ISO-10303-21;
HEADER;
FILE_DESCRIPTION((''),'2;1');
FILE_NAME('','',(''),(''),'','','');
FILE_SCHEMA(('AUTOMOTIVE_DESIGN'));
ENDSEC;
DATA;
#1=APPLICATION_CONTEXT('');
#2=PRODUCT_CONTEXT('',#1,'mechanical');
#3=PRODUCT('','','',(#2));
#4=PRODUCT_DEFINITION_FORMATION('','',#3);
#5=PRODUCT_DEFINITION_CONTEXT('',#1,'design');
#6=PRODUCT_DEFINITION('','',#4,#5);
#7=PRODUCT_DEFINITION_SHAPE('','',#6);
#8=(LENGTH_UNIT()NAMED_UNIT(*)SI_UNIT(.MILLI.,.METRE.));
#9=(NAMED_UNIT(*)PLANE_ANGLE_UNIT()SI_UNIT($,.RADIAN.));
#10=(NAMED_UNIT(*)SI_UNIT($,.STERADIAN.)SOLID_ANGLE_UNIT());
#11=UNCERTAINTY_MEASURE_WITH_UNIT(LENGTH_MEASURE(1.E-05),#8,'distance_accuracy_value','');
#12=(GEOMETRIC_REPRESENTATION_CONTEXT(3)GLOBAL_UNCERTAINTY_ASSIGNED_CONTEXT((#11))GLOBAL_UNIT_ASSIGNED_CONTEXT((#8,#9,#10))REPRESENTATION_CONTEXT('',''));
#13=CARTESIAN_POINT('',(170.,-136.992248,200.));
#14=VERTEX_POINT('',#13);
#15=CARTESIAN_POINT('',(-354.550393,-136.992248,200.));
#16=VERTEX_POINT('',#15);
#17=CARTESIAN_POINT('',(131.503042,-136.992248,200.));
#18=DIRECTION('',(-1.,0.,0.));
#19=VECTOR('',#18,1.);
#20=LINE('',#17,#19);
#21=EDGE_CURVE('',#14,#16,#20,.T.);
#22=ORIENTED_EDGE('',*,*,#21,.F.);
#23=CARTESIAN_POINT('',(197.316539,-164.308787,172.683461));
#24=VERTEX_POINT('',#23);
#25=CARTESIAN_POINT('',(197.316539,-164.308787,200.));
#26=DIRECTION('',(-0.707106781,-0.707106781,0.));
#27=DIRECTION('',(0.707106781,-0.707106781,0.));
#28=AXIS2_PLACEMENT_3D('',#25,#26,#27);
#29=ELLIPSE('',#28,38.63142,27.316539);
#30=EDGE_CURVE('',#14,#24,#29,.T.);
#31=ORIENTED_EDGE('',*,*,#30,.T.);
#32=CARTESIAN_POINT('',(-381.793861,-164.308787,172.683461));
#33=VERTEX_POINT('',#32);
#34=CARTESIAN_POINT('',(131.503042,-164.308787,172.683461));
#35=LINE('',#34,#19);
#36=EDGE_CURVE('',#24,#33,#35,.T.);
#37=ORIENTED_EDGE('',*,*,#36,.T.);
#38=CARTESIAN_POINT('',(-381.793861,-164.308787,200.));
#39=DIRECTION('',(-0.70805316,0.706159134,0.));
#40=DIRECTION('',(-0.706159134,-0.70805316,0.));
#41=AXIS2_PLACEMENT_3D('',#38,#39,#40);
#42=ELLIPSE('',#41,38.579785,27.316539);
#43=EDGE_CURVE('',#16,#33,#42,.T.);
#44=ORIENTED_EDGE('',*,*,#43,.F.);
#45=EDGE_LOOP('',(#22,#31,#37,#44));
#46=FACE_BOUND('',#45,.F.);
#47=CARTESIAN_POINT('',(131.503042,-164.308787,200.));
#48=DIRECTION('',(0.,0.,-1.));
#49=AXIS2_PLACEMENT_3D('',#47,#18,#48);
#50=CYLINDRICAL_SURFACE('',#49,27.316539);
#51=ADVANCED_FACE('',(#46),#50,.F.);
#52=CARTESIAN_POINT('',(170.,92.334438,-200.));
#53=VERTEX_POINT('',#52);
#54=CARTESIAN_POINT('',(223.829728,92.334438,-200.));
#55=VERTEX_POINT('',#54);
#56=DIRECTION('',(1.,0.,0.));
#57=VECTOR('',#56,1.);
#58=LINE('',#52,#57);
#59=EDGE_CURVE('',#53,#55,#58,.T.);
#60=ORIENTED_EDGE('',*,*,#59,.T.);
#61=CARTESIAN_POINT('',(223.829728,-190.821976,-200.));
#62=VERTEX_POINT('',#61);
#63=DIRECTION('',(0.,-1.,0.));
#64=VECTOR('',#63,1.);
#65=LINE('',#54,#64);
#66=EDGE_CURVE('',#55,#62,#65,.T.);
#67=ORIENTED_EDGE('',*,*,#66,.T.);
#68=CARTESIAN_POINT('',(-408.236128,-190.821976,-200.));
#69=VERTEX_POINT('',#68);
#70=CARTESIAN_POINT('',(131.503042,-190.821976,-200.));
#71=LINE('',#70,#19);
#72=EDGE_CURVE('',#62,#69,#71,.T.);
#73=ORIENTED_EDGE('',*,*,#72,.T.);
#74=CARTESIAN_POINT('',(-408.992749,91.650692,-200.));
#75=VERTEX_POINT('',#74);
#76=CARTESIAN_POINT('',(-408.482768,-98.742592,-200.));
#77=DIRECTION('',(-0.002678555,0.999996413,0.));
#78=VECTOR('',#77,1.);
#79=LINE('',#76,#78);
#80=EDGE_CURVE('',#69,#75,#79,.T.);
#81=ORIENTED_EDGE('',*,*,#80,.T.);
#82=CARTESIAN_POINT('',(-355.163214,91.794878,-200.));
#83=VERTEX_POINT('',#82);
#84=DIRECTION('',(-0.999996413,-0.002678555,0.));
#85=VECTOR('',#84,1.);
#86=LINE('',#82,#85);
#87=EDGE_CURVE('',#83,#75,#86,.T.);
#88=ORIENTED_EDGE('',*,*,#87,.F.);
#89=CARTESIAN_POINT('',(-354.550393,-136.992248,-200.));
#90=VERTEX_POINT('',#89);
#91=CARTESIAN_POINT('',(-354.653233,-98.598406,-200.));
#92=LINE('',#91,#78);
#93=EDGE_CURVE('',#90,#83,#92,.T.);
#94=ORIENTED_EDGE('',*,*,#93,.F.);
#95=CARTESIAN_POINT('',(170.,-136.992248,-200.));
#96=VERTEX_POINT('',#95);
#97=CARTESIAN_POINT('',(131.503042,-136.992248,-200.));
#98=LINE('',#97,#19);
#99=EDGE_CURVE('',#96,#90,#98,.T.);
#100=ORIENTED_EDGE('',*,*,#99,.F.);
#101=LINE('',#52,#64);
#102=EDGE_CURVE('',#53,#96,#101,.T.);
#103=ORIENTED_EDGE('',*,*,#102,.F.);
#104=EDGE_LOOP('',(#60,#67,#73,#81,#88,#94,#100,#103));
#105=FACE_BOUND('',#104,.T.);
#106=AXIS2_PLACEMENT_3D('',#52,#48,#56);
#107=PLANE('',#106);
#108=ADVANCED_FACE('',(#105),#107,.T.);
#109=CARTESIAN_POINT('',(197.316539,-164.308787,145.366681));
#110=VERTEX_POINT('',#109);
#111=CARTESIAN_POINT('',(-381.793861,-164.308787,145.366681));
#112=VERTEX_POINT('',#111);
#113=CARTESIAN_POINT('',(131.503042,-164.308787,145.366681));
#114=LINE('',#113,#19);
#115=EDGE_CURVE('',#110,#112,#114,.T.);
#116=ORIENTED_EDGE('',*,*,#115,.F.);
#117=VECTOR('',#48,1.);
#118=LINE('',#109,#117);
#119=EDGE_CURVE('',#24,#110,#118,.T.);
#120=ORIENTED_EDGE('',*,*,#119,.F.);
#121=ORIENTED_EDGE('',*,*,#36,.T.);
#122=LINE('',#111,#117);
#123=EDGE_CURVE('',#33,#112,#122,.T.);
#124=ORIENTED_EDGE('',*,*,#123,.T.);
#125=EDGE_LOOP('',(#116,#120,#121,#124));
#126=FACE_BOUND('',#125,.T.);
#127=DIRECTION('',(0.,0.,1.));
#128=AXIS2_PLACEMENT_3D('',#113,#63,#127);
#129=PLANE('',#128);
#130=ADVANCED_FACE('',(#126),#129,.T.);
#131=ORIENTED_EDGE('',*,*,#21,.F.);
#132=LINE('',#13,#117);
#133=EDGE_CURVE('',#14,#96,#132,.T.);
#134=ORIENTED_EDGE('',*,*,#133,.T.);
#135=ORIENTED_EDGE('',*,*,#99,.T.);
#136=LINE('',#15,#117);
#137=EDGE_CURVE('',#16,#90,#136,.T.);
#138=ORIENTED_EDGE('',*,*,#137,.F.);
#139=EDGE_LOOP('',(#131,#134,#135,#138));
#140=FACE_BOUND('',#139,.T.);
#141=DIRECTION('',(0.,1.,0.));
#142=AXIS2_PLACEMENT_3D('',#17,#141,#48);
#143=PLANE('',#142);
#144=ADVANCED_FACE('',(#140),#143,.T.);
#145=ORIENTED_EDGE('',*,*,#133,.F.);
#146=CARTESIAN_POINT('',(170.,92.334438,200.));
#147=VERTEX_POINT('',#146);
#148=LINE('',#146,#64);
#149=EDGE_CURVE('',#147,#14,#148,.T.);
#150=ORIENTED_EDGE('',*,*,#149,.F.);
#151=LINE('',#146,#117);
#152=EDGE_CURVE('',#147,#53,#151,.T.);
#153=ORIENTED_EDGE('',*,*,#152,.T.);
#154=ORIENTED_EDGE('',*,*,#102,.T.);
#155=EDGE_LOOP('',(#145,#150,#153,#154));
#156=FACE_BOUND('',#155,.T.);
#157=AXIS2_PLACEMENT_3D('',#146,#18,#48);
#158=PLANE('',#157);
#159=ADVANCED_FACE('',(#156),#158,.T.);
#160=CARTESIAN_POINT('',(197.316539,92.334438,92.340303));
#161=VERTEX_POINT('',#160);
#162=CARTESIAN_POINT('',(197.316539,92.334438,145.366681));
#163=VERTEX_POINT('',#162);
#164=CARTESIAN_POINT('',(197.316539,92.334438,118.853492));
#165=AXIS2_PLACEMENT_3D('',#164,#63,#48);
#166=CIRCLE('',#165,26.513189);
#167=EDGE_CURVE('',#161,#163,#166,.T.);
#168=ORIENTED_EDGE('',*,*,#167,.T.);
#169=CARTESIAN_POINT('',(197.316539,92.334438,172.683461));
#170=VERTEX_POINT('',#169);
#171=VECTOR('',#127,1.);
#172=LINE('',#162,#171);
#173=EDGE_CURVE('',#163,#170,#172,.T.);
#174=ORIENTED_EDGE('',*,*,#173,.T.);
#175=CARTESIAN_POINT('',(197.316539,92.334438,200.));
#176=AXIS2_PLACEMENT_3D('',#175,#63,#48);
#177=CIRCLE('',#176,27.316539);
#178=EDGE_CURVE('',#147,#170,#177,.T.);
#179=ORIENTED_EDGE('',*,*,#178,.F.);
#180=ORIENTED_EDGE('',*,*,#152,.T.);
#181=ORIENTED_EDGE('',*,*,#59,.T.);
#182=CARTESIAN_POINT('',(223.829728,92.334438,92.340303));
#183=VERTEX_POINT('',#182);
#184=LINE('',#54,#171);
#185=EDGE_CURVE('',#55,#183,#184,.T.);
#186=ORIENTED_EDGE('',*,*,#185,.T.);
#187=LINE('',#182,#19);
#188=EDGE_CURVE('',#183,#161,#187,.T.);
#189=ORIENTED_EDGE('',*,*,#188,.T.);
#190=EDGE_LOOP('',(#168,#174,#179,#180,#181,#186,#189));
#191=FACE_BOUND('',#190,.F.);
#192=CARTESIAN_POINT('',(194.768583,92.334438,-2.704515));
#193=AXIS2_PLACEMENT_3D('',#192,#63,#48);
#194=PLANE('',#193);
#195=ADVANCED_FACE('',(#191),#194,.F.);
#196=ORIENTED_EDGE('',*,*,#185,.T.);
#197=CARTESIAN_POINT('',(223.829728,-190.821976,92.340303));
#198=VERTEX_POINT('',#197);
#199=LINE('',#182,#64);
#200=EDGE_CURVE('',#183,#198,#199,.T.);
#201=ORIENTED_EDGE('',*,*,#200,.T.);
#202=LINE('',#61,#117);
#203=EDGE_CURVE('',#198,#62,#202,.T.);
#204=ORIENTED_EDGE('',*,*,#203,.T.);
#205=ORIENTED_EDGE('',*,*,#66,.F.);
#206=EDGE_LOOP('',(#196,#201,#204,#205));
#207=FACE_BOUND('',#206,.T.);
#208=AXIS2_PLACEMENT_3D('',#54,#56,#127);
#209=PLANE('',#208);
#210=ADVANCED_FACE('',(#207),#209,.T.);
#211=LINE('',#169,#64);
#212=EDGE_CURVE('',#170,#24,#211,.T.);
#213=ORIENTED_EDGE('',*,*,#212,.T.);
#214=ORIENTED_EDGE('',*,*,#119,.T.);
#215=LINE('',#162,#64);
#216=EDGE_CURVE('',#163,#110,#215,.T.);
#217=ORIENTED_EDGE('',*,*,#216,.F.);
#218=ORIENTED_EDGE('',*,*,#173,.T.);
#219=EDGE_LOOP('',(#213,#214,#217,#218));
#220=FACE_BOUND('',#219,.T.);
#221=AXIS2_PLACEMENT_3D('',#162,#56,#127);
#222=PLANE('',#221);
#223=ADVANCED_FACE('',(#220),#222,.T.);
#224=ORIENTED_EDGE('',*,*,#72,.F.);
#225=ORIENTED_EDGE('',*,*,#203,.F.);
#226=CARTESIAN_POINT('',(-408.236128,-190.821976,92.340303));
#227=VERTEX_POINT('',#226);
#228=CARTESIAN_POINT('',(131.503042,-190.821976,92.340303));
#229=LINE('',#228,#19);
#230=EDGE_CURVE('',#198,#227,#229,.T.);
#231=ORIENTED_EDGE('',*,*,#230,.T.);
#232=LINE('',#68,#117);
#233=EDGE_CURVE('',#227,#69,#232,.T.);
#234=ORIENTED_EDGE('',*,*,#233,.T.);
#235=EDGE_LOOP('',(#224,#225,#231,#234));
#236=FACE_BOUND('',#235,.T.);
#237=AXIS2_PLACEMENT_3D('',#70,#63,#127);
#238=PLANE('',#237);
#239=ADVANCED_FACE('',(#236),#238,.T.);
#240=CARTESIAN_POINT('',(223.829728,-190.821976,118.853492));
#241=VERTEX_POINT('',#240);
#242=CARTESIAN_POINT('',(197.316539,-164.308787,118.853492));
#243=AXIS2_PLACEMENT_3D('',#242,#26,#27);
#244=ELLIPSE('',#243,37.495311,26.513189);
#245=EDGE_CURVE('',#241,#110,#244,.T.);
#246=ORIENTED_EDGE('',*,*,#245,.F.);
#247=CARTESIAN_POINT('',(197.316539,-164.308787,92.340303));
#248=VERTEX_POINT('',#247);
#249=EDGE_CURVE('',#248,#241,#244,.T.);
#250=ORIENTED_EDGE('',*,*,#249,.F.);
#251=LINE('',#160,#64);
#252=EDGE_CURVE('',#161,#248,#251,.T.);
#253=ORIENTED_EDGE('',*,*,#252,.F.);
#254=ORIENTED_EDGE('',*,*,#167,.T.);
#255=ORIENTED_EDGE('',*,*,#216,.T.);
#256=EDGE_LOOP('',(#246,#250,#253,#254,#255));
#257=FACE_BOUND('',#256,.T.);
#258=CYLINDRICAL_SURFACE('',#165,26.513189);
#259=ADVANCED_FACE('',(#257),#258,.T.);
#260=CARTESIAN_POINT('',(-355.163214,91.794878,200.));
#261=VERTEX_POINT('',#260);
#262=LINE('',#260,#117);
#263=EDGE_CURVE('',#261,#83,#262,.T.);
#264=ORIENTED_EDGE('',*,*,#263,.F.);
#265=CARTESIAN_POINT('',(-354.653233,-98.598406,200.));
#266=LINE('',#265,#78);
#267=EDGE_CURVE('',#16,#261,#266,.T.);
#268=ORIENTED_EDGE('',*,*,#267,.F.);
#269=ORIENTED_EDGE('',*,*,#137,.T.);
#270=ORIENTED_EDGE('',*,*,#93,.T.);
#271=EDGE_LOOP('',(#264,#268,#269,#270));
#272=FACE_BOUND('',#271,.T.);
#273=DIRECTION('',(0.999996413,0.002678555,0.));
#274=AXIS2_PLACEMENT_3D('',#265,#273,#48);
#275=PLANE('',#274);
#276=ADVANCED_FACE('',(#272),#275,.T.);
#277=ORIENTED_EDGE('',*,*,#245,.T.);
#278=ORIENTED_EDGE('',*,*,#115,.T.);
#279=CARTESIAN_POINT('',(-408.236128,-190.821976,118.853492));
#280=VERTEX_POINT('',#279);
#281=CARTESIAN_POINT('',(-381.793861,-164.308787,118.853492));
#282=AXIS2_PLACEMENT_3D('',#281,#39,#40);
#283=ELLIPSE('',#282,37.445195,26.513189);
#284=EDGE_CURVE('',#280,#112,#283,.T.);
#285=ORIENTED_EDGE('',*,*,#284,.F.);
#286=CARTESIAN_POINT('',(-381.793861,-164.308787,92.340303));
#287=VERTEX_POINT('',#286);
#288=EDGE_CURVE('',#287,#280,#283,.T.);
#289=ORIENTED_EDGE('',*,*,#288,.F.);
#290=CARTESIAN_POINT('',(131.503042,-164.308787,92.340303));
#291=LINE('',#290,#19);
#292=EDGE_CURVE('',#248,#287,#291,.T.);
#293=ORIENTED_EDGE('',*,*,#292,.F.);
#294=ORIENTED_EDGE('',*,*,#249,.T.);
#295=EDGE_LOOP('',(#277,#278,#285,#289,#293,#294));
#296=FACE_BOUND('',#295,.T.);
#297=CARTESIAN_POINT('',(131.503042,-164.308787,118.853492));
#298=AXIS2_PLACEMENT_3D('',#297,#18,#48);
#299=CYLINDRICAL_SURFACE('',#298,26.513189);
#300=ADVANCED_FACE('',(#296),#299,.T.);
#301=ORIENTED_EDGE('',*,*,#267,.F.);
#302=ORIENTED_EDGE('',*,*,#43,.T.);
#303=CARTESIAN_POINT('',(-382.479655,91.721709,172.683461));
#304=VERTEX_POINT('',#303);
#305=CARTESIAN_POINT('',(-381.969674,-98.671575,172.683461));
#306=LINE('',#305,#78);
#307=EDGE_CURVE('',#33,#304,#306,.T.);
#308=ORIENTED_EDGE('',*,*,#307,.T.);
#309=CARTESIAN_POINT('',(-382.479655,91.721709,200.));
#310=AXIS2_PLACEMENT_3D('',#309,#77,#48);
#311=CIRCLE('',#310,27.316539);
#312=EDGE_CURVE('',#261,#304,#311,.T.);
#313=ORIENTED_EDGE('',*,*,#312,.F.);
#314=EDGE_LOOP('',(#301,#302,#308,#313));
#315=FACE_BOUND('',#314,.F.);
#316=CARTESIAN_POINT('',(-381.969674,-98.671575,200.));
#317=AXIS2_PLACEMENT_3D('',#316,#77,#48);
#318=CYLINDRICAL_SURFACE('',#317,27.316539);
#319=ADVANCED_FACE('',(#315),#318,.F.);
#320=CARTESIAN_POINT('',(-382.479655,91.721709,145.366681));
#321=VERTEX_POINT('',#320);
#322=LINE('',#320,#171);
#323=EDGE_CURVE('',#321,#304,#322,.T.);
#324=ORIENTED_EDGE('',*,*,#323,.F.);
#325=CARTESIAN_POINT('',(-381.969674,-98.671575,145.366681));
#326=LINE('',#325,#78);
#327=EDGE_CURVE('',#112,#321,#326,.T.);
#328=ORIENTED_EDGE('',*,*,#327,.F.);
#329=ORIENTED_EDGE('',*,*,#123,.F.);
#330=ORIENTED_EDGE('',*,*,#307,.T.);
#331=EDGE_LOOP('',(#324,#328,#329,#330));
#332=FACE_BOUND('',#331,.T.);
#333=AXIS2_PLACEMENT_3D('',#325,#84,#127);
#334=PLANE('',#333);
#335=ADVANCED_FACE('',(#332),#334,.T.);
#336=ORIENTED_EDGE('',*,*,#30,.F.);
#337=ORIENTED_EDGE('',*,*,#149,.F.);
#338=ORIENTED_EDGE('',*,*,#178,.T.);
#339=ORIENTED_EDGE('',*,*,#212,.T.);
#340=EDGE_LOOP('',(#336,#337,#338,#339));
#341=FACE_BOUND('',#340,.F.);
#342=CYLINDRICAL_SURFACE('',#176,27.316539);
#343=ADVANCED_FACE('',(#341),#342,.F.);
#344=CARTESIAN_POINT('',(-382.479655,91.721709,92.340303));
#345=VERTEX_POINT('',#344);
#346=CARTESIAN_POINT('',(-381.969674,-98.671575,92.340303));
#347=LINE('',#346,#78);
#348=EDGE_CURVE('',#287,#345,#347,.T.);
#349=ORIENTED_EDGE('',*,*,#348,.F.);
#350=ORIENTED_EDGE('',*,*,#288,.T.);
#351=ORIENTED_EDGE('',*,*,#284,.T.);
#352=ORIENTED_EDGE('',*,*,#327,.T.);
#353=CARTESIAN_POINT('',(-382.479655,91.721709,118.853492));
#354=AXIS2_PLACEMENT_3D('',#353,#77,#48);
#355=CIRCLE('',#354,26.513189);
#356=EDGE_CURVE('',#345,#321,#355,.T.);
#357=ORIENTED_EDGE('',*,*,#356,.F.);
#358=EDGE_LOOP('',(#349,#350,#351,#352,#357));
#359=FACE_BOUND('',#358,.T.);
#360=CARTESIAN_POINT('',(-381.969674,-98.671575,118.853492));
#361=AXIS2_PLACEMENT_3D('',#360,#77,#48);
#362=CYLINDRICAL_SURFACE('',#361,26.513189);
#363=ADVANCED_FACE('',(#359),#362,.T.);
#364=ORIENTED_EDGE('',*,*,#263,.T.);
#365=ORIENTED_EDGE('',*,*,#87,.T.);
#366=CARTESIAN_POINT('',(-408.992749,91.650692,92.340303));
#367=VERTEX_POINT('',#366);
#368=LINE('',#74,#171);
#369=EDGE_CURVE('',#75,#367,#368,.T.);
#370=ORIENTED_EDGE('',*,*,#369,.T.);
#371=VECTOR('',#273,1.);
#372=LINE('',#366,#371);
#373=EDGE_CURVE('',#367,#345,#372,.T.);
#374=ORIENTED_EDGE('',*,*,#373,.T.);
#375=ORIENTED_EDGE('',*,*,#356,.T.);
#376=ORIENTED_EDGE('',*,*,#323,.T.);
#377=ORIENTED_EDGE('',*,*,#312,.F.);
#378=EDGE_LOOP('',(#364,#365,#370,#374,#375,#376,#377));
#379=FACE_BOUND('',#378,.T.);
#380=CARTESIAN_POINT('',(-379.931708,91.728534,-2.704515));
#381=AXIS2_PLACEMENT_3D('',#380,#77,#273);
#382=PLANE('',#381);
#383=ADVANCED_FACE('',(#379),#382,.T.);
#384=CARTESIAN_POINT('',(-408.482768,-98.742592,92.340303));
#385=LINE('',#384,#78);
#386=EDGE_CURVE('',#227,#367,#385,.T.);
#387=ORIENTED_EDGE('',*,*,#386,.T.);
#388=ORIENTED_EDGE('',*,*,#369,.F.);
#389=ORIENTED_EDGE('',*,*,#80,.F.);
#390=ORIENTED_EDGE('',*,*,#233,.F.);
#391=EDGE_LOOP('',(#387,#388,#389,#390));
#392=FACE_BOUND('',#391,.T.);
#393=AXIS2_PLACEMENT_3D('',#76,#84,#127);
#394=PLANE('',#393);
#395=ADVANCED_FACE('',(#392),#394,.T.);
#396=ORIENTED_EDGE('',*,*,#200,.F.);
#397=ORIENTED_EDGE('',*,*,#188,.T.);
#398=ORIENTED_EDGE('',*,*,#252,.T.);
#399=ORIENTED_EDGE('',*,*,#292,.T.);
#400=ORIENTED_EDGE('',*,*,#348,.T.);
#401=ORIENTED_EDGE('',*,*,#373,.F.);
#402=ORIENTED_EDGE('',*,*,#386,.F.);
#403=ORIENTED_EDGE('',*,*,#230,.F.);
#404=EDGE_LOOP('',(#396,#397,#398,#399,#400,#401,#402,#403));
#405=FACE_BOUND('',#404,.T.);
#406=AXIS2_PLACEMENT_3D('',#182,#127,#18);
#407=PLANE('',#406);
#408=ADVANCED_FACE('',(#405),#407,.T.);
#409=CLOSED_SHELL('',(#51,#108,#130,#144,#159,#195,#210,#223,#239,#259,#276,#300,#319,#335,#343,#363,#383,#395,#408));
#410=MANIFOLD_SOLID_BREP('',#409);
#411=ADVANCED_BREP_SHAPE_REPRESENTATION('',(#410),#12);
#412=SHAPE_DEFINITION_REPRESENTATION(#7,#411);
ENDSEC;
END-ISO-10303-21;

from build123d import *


# Not quite as in the source:
# - the program builds the solid bodies; features that only make, move or delete a surface that nothing else refers to are left out


with BuildPart() as f2:
    # F2: sweep along a path in F1
    with BuildLine(Plane.XY) as f2_path:
        Line((131.5030422138, 92.3344379031), (131.5030422138, -98.4952900969))
        Line((131.5030422138, -98.4952900969), (-316.1564137862, -98.4952900969))
        Line((-316.1564137862, -98.4952900969), (-316.6663944721, 91.8979942799))
    # F0 (on Front) → F2 (sweep)
    with BuildSketch(Plane.XZ):
        with BuildLine():
            Line((223.829728, 92.340303), (197.316539, 92.340303))
            ThreePointArc((197.316539, 92.340303), (223.829728, 118.853492), (197.316539, 145.366681))
            Line((197.316539, 145.366681), (197.316539, 172.683461))
            ThreePointArc((197.316539, 172.683461), (178.0008290346, 180.6842900346), (170, 200))
            Line((170, 200), (170, -200))
            Line((170, -200), (223.829728, -200))
            Line((223.829728, -200), (223.829728, 92.340303))
        make_face()
    sweep(path=f2_path.line, transition=Transition.RIGHT)


solid = f2.part
